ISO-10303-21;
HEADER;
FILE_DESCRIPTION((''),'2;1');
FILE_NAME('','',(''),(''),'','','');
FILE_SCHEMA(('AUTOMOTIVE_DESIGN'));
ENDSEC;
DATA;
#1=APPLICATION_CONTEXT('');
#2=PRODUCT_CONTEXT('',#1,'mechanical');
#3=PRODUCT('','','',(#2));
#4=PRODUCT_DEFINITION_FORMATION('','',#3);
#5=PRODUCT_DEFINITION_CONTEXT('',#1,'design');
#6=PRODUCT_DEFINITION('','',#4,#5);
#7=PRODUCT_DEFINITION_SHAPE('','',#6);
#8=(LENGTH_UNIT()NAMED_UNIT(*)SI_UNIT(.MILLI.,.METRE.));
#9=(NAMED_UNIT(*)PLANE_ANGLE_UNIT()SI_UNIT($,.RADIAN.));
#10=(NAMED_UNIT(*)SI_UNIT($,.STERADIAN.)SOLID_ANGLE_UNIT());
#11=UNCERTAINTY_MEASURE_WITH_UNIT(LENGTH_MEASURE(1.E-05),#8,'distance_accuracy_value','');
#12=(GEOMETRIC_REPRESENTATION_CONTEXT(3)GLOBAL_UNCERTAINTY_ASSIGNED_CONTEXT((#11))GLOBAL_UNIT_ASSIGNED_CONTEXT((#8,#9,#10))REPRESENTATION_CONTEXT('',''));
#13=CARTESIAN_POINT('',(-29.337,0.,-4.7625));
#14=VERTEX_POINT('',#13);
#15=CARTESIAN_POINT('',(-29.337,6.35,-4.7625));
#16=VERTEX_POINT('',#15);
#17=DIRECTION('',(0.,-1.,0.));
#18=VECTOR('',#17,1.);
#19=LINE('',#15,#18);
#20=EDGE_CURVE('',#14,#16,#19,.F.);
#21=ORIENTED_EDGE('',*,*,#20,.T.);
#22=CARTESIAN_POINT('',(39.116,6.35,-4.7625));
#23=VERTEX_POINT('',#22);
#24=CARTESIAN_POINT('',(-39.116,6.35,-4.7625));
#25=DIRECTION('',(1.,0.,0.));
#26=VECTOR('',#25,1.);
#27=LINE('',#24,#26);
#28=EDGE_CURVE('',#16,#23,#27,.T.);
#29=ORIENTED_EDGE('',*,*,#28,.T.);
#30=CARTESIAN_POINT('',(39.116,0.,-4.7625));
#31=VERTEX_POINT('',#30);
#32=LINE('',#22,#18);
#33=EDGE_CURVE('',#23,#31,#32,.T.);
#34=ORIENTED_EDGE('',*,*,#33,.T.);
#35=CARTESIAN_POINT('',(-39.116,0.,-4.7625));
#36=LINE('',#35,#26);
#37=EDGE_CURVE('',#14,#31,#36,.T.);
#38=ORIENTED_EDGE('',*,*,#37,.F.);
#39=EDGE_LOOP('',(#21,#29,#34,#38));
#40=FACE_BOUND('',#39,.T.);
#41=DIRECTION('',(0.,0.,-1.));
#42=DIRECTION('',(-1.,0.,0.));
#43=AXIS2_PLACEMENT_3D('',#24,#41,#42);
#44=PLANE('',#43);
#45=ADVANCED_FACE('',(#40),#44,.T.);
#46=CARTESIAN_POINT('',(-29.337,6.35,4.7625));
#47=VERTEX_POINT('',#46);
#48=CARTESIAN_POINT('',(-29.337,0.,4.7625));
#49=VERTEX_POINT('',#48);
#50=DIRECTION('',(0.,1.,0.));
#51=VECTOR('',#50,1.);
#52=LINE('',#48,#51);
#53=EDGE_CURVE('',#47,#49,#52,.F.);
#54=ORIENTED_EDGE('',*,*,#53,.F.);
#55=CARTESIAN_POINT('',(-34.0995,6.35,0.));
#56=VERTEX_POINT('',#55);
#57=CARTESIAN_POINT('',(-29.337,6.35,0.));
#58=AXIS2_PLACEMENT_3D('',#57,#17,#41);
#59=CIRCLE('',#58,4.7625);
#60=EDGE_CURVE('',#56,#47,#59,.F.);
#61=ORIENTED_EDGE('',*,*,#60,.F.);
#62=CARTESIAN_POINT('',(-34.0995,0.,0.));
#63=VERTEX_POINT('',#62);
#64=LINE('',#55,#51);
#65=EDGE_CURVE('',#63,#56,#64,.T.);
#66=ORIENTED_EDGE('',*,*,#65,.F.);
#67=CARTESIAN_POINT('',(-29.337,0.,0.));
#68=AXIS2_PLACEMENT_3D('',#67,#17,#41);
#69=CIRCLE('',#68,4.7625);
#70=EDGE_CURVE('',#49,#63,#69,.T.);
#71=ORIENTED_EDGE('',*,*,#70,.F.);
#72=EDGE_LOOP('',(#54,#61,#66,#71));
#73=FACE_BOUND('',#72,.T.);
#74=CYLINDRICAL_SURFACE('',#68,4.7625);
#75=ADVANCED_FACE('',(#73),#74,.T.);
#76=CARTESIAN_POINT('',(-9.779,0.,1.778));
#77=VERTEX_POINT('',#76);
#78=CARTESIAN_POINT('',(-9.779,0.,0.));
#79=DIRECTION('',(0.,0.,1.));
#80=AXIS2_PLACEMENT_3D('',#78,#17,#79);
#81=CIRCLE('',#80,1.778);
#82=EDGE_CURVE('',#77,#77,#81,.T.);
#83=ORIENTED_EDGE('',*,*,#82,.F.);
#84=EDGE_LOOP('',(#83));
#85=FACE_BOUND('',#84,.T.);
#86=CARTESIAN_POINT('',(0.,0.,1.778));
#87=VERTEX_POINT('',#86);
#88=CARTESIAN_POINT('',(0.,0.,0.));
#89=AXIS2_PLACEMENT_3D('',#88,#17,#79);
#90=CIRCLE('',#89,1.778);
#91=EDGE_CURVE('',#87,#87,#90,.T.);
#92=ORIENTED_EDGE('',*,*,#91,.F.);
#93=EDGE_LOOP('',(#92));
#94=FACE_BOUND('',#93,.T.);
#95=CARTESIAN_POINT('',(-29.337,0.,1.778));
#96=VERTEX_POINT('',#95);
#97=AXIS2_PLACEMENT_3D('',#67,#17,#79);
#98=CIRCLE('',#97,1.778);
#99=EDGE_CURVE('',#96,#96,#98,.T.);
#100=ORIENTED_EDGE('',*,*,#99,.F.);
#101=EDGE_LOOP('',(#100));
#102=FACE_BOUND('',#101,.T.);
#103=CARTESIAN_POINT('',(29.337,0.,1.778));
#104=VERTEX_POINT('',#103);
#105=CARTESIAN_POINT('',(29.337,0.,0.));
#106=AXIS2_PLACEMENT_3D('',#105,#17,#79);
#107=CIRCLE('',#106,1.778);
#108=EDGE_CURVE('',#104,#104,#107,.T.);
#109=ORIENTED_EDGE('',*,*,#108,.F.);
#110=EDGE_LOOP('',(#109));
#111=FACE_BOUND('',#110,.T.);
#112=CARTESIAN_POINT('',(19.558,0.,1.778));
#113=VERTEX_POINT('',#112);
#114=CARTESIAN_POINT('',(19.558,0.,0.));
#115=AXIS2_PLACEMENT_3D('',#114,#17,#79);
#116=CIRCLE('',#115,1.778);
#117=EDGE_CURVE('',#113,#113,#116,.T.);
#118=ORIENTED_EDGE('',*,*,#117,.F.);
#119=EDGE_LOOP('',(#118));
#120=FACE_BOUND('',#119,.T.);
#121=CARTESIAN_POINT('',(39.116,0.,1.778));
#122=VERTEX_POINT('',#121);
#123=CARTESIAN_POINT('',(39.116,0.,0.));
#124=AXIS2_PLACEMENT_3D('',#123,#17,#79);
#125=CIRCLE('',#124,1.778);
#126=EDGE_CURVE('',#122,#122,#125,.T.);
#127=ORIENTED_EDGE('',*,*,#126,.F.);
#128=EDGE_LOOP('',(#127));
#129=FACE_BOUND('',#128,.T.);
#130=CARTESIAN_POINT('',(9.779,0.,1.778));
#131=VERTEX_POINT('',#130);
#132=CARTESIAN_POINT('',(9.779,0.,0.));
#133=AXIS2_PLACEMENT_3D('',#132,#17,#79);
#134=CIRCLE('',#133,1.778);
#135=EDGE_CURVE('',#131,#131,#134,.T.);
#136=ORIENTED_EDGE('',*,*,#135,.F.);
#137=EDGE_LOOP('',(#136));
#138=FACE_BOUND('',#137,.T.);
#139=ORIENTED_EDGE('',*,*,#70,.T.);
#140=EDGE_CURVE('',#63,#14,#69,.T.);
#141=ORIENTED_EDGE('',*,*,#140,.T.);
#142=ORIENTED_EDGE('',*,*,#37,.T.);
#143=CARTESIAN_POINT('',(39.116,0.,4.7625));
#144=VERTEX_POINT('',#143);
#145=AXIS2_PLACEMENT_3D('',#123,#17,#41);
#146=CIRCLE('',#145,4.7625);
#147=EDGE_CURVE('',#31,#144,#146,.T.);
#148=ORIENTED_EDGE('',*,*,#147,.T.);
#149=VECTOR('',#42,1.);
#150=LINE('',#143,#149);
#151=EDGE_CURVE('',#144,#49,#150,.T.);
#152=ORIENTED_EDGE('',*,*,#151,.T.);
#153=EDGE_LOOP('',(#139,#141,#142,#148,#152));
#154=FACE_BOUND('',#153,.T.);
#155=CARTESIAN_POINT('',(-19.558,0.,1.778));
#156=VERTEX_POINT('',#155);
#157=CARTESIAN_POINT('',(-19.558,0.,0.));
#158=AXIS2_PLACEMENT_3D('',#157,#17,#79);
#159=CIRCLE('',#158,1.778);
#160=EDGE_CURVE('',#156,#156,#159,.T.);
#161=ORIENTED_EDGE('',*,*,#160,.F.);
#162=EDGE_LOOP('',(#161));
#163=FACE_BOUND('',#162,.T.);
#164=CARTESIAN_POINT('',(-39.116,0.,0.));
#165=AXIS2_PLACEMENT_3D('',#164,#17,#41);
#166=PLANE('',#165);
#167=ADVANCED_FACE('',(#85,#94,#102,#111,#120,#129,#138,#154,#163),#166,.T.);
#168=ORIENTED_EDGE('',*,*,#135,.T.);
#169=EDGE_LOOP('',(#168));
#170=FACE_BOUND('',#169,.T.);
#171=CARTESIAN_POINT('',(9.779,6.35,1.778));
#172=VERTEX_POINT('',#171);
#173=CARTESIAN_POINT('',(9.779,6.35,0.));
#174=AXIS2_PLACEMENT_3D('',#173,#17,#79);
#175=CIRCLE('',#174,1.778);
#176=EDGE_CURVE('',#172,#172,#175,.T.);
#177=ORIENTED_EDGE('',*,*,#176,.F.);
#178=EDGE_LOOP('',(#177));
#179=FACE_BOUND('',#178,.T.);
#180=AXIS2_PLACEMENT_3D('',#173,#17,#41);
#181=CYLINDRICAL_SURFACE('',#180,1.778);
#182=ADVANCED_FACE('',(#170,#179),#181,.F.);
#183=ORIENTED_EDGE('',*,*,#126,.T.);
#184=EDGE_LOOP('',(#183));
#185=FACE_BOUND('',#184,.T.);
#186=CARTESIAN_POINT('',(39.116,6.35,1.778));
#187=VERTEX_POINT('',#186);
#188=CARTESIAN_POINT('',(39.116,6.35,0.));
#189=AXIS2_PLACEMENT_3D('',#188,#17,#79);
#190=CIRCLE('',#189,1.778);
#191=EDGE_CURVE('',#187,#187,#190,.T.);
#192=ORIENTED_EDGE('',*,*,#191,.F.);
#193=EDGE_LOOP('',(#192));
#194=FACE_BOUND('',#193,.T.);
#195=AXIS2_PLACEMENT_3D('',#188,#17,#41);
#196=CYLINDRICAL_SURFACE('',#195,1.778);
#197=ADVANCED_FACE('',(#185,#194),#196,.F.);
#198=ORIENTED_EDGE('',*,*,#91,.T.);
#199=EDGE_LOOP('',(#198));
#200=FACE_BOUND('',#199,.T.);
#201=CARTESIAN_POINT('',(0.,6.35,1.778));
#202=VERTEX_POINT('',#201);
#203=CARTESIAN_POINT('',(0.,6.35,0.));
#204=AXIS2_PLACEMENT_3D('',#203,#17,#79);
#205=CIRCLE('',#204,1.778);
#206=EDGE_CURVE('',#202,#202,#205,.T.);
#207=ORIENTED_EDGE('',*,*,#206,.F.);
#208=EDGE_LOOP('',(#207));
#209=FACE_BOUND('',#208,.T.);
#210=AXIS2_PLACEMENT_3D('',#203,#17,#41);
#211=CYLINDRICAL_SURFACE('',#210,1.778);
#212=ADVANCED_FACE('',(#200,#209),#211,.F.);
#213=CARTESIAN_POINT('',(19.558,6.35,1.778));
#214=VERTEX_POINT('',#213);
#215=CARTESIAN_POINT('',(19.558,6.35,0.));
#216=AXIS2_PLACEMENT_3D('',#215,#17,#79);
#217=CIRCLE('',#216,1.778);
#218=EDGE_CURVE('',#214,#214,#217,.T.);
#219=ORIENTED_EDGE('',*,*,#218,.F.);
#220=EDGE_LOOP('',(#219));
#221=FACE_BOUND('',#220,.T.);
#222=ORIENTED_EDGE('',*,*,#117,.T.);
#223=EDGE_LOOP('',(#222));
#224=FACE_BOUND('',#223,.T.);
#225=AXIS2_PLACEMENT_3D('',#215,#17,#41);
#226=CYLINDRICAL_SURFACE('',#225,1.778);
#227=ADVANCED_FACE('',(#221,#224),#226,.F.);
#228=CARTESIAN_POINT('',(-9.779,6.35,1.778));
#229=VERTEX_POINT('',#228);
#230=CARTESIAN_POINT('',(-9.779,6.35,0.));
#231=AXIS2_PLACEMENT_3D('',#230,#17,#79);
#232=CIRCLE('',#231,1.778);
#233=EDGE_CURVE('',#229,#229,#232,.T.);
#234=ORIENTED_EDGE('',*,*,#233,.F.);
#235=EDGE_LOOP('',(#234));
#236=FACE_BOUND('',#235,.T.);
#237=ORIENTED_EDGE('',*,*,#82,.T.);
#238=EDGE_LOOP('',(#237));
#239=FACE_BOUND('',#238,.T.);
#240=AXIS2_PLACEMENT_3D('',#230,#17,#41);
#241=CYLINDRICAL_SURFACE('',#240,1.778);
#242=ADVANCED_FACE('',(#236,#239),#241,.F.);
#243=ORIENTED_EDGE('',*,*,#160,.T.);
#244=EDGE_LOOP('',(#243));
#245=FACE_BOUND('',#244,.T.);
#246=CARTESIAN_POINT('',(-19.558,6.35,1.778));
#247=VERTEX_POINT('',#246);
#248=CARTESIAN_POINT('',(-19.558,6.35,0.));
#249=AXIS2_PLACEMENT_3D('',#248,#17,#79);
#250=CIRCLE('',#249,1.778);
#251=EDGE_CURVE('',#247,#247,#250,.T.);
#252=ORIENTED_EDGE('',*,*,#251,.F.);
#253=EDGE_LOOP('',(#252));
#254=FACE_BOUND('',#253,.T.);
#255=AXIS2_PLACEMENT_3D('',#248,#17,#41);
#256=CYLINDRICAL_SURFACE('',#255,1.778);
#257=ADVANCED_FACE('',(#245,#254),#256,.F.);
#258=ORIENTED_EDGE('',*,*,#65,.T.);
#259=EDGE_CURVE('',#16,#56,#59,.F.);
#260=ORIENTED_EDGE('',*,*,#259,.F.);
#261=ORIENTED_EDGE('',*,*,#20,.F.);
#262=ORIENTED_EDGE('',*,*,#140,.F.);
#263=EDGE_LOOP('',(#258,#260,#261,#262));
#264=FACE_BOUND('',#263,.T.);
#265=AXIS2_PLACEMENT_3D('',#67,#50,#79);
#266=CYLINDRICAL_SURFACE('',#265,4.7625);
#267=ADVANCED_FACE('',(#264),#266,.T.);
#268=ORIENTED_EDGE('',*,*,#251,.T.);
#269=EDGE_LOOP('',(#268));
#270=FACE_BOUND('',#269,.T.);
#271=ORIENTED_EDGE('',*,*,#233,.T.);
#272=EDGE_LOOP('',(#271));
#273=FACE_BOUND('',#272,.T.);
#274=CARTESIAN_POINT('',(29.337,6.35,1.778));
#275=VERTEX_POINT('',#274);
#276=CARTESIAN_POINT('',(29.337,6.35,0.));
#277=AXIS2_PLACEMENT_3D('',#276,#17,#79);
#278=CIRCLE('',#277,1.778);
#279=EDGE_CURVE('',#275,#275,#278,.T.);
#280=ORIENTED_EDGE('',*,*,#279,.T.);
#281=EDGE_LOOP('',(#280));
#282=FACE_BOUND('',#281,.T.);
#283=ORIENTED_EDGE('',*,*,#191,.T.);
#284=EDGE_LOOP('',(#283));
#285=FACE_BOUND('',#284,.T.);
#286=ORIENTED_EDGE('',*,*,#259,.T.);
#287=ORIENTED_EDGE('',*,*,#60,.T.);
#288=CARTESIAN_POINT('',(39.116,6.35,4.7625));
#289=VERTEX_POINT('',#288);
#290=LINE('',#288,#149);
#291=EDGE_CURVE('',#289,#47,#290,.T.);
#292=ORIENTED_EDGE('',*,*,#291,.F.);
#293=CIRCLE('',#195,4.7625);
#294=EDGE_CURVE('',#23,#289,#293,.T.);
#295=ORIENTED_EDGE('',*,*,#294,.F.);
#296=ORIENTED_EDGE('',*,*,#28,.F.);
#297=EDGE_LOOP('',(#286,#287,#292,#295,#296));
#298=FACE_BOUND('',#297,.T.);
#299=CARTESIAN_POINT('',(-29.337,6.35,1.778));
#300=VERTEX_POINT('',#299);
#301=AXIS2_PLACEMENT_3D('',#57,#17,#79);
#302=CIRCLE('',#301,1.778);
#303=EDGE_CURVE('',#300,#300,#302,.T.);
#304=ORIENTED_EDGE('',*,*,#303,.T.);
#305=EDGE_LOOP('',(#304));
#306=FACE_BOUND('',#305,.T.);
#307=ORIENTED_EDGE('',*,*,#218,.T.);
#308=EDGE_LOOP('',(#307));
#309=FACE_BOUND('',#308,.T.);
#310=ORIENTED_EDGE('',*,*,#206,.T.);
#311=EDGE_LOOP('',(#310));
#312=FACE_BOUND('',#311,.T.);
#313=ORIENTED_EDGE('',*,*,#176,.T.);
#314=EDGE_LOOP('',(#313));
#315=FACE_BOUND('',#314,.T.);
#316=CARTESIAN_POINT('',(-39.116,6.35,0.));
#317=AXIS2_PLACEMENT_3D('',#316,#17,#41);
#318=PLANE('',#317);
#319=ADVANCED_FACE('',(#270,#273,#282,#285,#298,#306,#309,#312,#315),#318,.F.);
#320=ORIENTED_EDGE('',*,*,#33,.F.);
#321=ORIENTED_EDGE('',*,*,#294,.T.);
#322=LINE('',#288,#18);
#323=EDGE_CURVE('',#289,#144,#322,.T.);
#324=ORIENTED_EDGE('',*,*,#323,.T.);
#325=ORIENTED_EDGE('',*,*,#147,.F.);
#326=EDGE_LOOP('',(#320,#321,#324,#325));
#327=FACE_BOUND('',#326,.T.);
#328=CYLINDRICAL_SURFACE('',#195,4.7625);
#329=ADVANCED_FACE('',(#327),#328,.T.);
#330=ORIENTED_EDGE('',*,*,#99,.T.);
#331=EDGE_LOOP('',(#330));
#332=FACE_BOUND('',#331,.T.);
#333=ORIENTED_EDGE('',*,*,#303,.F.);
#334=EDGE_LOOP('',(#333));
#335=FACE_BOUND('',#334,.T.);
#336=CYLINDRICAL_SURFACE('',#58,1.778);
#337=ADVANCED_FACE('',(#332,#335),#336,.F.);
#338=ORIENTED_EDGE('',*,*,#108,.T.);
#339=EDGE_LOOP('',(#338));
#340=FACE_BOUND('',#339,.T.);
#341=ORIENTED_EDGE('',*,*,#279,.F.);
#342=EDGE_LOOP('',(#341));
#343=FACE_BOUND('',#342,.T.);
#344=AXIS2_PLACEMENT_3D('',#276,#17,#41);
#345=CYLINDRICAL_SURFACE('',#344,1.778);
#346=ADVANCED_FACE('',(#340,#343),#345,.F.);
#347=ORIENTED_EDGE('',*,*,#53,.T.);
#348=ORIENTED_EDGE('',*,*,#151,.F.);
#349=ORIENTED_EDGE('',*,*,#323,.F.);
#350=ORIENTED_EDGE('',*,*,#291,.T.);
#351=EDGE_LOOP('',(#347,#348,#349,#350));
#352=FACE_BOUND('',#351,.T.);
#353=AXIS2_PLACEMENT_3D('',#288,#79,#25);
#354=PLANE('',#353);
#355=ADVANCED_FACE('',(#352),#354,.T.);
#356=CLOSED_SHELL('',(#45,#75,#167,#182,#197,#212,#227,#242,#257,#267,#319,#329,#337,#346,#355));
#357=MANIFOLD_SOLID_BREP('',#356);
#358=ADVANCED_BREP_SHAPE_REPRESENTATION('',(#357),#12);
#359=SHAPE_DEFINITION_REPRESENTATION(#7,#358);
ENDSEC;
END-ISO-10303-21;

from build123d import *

# Parameters (mm, degrees)
SKETCH1_R               = 1.778
BOSS_EXTRUDE1_DEPTH     = 6.35
CUT_EXTRUDE1_DEPTH      = 45.59065674
CUT_EXTRUDE1_DEPTH_BACK = 45.59065674
SKETCH2_W               = 15.126003495
SKETCH2_H               = 9.710924743
FILLET1_R               = 4.7625


with BuildPart() as part:
    # Sketch1 → Boss-Extrude1 (new body)
    with BuildSketch(Plane.XZ):
        with BuildLine():
            Line((-39.116, -4.7625), (39.116, -4.7625))
            ThreePointArc((39.116, -4.7625), (43.8785, 0), (39.116, 4.7625))
            Line((39.116, 4.7625), (-39.116, 4.7625))
            ThreePointArc((-39.116, 4.7625), (-43.8785, 0), (-39.116, -4.7625))
        make_face()
        with Locations(Location((39.116, 0, 0), (0, 0, 90))):
            Circle(SKETCH1_R, mode=Mode.SUBTRACT)
        with Locations(Location((29.337, 0, 0), (0, 0, 90))):
            Circle(SKETCH1_R, mode=Mode.SUBTRACT)
        with Locations(Location((19.558, 0, 0), (0, 0, 90))):
            Circle(SKETCH1_R, mode=Mode.SUBTRACT)
        with Locations(Location((9.779, 0, 0), (0, 0, 90))):
            Circle(SKETCH1_R, mode=Mode.SUBTRACT)
        with Locations(Location((0, 0, 0), (0, 0, 90))):
            Circle(SKETCH1_R, mode=Mode.SUBTRACT)
        with Locations(Location((-9.779, 0, 0), (0, 0, 90))):
            Circle(SKETCH1_R, mode=Mode.SUBTRACT)
        with Locations(Location((-19.558, 0, 0), (0, 0, 90))):
            Circle(SKETCH1_R, mode=Mode.SUBTRACT)
        with Locations(Location((-29.337, 0, 0), (0, 0, 90))):
            Circle(SKETCH1_R, mode=Mode.SUBTRACT)
        with Locations(Location((-39.116, 0, 0), (0, 0, 90))):
            Circle(SKETCH1_R, mode=Mode.SUBTRACT)
    extrude(amount=-BOSS_EXTRUDE1_DEPTH)

    # Sketch2 → Cut-Extrude1 (cut, two sides: drawn at the far end of the back side and taken through both)
    with BuildSketch(Plane(origin=(0, 6.35, 0), x_dir=(1, 0, 0), z_dir=(0, 1, 0)).offset(-CUT_EXTRUDE1_DEPTH_BACK)):
        with Locations((-41.662501748, 0.092962372)):
            Rectangle(SKETCH2_W, SKETCH2_H)
    extrude(amount=CUT_EXTRUDE1_DEPTH + CUT_EXTRUDE1_DEPTH_BACK, mode=Mode.SUBTRACT)

    # Fillet1
    fillet1_edges = [part.edges().sort_by_distance(p)[0] for p in [
        (-34.0995, 3.175, -4.7625),
        (-34.0995, 3.175, 4.7625),
    ]]
    fillet(fillet1_edges, radius=FILLET1_R - 0.0001)  # a hair under: the kernel refuses the full size


solid = part.part
